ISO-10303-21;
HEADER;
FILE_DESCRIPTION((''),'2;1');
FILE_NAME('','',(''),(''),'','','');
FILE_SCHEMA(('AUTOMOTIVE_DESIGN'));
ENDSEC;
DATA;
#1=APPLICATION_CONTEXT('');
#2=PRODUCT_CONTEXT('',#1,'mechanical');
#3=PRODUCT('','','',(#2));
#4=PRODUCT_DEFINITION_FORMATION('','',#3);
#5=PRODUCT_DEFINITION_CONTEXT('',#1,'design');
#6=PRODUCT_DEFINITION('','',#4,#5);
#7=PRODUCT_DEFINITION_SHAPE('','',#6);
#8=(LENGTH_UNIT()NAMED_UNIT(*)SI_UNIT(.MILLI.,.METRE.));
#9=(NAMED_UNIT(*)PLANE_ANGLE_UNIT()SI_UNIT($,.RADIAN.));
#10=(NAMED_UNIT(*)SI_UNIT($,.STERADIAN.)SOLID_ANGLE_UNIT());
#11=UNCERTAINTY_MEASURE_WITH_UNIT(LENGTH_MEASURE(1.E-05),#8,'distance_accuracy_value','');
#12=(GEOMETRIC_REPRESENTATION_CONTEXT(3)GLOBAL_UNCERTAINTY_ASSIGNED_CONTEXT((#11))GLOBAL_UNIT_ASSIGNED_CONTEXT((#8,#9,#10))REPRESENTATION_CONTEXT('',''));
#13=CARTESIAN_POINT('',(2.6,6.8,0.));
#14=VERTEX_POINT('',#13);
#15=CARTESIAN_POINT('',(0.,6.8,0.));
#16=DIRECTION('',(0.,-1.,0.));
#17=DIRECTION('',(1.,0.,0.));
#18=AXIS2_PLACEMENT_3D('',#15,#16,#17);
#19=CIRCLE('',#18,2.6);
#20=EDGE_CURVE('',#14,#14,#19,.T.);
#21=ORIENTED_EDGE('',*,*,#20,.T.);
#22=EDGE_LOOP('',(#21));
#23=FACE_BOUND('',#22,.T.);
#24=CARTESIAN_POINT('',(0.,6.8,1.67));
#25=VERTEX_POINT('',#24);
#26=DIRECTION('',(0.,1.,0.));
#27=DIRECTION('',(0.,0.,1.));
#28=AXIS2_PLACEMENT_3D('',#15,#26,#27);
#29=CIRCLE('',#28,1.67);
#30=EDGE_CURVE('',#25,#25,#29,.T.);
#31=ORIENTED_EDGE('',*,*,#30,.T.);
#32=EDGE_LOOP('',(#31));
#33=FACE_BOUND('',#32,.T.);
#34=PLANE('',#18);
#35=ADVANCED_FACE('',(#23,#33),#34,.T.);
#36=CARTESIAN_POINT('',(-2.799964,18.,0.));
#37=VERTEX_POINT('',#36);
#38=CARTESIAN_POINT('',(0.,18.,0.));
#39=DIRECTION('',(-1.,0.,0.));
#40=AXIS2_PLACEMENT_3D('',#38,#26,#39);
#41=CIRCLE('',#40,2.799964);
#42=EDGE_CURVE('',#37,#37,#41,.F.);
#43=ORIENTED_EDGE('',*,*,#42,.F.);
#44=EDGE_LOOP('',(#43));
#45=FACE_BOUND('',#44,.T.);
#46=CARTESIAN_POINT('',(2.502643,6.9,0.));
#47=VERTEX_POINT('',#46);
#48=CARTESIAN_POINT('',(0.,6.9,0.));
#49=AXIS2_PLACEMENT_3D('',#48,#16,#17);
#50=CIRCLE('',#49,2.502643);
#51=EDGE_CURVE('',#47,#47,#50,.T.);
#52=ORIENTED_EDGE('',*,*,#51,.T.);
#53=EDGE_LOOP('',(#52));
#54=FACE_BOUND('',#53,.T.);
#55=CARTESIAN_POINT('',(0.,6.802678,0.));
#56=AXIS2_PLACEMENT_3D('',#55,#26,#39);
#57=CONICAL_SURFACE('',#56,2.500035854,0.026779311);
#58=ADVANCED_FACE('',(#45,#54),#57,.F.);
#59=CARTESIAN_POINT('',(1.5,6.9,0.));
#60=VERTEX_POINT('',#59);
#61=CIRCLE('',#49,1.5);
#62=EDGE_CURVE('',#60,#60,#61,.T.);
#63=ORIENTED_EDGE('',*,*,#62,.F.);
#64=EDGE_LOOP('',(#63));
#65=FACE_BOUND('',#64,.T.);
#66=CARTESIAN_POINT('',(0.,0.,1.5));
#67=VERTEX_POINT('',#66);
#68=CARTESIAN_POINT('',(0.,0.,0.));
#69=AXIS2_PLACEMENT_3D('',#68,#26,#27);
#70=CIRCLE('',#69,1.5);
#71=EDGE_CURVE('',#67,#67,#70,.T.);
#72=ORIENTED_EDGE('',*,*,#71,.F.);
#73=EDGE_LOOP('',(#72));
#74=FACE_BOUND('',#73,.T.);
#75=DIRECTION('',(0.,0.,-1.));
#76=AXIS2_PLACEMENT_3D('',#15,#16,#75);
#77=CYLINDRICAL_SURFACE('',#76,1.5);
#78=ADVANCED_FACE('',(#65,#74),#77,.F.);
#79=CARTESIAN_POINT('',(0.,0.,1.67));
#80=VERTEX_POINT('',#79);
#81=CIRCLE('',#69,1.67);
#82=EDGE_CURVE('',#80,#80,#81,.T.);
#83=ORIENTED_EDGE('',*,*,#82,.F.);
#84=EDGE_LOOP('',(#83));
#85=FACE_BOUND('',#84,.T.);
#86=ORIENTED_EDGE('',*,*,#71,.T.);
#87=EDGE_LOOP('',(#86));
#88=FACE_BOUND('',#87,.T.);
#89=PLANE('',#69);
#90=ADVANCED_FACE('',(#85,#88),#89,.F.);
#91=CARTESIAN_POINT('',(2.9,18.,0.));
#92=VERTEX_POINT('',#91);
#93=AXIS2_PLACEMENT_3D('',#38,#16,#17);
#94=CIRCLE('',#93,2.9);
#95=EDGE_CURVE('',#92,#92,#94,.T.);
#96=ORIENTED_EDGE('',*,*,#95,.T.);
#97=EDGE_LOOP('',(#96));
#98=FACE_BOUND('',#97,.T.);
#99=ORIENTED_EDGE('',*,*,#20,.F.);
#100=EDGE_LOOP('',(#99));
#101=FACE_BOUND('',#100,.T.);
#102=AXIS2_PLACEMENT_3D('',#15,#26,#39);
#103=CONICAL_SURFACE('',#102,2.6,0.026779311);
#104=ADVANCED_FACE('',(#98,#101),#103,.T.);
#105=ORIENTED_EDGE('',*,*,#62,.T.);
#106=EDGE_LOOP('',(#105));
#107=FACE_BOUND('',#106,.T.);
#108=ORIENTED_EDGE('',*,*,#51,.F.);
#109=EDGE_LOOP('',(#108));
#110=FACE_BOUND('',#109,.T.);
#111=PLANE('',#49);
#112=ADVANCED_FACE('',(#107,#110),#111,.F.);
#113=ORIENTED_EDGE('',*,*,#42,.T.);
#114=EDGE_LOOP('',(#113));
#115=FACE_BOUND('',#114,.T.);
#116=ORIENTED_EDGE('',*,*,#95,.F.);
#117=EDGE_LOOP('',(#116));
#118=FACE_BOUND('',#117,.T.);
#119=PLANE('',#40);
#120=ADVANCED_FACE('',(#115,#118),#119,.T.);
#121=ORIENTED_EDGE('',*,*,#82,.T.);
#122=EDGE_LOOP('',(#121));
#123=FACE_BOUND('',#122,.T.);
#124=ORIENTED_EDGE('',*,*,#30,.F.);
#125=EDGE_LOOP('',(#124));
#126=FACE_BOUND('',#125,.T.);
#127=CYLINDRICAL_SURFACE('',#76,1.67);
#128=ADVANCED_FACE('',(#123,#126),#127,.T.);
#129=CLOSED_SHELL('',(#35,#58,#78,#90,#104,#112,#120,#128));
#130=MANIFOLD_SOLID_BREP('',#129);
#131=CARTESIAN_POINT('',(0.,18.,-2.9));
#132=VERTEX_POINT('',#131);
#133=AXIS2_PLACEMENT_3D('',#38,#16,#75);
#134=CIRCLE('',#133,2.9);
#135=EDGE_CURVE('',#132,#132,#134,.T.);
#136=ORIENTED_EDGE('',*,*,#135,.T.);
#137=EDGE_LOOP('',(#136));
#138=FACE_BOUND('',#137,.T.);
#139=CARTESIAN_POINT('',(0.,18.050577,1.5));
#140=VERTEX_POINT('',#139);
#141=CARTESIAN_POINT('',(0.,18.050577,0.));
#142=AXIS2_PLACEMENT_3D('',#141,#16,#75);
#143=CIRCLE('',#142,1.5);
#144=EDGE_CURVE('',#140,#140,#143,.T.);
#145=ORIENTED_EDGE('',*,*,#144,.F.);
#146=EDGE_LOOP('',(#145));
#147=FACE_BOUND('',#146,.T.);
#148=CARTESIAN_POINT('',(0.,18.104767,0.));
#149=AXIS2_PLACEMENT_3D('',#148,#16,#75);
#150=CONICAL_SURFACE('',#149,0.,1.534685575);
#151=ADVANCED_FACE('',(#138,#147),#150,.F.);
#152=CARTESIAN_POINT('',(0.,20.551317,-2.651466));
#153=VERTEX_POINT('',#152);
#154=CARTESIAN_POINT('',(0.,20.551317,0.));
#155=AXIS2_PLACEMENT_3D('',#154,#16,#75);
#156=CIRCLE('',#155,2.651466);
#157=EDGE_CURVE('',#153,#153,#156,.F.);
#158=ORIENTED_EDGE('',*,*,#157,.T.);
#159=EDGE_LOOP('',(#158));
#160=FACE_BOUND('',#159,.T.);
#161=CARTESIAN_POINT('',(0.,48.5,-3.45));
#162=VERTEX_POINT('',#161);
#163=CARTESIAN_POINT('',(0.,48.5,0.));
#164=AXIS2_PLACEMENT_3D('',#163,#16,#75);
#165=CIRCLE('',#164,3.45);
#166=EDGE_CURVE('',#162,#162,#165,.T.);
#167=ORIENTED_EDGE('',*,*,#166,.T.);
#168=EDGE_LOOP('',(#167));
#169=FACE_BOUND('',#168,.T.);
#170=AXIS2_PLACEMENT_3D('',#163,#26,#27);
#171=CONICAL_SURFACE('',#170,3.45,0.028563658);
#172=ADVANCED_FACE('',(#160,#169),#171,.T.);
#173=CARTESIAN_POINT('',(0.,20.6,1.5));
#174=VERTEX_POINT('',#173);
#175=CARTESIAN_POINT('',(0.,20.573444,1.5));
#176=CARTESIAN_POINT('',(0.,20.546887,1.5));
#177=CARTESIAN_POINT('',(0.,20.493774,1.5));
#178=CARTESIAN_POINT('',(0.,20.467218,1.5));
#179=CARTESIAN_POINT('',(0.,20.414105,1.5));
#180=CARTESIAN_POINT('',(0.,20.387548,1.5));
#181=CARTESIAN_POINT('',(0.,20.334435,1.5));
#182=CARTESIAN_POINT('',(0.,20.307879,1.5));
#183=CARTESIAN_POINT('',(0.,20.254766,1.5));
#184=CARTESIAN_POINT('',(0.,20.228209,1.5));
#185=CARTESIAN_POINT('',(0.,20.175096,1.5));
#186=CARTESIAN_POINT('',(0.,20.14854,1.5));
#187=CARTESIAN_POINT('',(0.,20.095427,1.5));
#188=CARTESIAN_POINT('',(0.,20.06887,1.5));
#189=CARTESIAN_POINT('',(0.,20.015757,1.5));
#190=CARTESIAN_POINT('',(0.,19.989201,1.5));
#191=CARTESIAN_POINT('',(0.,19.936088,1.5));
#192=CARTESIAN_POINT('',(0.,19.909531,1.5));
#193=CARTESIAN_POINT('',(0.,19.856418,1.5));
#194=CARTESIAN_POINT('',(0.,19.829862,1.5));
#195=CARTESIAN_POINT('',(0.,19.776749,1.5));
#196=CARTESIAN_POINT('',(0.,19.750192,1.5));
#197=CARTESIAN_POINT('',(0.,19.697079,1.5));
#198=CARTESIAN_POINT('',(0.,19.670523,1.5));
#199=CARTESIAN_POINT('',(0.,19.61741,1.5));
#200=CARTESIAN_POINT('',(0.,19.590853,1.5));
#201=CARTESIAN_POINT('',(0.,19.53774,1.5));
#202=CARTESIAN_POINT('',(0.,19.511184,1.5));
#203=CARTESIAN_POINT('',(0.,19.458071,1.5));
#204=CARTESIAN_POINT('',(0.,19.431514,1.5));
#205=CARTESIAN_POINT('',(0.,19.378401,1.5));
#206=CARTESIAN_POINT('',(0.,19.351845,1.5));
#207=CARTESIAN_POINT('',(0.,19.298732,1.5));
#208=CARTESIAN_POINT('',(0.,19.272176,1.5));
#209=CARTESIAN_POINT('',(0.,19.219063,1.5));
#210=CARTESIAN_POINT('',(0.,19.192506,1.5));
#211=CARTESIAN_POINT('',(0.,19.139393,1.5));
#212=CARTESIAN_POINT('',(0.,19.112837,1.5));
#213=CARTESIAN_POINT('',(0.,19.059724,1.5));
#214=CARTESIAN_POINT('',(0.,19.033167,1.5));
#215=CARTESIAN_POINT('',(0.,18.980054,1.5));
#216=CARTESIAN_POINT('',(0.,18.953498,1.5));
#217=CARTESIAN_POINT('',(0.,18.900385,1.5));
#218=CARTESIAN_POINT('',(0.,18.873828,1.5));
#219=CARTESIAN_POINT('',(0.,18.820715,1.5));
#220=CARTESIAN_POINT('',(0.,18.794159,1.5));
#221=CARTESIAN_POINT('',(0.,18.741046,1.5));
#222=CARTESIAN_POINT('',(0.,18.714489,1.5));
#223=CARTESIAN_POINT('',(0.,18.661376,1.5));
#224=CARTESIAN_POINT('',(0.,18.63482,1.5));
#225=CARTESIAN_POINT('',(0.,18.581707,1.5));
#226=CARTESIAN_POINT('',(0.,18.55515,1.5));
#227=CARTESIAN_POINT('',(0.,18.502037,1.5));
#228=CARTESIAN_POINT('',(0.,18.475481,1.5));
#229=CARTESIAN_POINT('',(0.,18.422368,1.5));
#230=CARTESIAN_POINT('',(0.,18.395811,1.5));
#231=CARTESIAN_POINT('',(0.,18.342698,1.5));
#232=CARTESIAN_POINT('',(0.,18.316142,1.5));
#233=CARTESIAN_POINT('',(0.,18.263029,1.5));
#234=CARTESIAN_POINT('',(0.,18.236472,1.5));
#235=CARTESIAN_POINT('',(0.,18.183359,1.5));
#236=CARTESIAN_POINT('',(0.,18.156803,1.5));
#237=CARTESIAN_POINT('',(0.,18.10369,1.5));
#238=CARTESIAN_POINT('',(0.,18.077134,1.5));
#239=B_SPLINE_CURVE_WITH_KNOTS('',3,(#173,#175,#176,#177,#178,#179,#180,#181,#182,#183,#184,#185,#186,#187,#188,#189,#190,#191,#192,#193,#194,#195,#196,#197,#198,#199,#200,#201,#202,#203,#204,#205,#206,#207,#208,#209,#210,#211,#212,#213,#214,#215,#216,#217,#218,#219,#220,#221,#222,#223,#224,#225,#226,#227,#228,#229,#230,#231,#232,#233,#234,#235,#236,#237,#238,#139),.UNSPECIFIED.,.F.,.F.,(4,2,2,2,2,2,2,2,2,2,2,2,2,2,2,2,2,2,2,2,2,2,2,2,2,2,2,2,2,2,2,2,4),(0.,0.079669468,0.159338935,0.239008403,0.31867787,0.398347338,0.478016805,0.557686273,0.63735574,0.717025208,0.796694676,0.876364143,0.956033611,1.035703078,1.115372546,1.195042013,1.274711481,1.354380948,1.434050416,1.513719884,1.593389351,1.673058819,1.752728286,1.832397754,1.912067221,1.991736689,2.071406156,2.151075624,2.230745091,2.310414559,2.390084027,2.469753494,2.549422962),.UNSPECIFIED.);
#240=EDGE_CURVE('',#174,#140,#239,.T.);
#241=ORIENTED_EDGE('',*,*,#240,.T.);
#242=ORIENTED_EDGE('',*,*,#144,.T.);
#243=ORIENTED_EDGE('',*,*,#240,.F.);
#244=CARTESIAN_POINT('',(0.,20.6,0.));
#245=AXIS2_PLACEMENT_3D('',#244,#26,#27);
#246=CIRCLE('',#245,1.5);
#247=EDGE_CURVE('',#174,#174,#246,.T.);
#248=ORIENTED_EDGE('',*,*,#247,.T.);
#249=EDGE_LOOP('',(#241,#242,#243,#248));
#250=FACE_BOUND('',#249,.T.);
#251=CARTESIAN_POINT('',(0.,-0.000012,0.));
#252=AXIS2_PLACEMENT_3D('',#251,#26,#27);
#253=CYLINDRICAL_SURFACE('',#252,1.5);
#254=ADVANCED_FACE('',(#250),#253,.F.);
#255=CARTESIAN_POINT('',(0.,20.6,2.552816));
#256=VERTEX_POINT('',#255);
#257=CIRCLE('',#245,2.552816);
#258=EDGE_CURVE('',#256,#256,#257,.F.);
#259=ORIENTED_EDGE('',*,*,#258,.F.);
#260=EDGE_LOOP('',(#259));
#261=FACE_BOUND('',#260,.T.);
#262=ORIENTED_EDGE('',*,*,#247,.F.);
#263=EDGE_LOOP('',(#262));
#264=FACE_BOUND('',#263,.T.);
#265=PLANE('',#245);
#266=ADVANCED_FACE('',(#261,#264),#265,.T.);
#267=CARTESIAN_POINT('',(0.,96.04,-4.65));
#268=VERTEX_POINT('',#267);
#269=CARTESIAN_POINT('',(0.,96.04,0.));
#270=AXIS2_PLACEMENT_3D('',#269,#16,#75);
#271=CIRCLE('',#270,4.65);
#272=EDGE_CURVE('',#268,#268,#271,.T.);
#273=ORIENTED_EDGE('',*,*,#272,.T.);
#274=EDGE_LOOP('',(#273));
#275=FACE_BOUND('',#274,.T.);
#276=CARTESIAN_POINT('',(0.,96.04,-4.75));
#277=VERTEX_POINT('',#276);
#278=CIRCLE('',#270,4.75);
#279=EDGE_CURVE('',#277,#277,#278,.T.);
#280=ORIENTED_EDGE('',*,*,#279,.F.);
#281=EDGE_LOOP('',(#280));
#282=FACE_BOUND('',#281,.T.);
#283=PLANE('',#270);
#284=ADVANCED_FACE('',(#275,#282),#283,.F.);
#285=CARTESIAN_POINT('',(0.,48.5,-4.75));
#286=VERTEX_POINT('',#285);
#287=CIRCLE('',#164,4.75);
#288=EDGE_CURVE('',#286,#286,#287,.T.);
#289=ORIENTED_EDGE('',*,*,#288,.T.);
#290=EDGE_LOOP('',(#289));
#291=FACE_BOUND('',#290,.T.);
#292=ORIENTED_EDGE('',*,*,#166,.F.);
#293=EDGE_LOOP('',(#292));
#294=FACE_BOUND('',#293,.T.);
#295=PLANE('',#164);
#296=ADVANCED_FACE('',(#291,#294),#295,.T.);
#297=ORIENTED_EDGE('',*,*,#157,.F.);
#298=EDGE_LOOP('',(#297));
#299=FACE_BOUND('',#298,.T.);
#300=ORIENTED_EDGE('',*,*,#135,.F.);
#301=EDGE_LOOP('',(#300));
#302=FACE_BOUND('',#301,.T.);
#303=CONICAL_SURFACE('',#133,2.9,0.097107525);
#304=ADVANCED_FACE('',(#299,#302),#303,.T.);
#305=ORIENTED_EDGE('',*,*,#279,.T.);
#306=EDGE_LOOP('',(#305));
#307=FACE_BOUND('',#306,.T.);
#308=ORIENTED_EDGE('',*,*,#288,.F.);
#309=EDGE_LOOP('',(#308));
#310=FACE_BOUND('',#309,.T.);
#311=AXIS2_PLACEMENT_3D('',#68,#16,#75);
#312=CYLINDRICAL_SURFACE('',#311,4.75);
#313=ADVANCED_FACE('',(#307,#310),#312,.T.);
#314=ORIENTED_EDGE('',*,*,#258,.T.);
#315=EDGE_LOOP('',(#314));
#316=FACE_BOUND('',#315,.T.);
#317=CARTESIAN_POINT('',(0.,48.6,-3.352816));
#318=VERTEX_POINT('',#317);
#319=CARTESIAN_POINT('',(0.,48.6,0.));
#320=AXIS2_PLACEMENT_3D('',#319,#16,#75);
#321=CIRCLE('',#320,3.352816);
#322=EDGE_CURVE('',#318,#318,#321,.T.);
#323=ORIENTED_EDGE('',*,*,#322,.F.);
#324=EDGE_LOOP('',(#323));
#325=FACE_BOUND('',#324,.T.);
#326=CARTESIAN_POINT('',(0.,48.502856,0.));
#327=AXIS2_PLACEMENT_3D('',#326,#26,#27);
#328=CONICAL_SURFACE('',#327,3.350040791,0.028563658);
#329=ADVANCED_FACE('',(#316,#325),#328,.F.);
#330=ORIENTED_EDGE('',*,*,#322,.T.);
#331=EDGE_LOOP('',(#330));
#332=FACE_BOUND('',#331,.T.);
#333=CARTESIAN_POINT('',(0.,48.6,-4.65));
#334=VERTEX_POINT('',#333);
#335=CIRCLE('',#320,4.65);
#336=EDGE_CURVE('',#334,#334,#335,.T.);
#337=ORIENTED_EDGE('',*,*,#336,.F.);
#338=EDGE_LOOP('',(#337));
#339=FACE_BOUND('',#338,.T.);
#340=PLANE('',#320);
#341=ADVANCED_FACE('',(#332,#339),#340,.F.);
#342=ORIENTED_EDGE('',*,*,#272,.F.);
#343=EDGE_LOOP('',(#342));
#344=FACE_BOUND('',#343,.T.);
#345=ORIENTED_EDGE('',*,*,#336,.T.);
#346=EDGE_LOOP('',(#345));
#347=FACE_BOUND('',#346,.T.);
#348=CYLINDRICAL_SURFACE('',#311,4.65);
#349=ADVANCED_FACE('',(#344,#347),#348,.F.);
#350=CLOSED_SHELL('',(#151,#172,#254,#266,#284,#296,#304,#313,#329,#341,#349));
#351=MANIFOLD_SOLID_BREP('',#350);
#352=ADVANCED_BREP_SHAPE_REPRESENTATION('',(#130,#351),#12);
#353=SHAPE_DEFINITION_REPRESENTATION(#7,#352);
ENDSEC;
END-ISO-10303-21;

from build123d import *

# Parameters (mm, degrees)
SKETCH1_R               = 1.67
SKETCH1_R_2             = 1.5
BOSS_EXTRUDE1_DEPTH     = 6.8
SHELL3_T                = -0.1
CUT_EXTRUDE2_DEPTH      = 10080
CUT_EXTRUDE2_DEPTH_BACK = 97.274641521
SKETCH7_R               = 1.5


# Read off the part's stored shape, not the designer's step: Shell1
with BuildPart() as part:
    # Sketch1 → Boss-Extrude1 (new body)
    with BuildSketch(Plane(origin=(0, 0, 0), x_dir=(1, 0, 0), z_dir=(0, 1, 0))):
        with Locations(Location((0, 0, 0), (0, 0, 270))):
            Circle(SKETCH1_R)
        with Locations(Location((0, 0, 0), (0, 0, 270))):
            Circle(SKETCH1_R_2, mode=Mode.SUBTRACT)
    extrude(amount=BOSS_EXTRUDE1_DEPTH)

    # Sketch4 → Revolve3 (revolve)
    with BuildSketch(Plane.XY):
        Polygon((0, 6.8), (2.6, 6.8), (2.9, 18), (0, 18), align=None)
    revolve(axis=Axis((0, 6.8, 0), (0, 1, 0)))

    # Shell1 outline → Shell1 (revolve, cut)
    with BuildSketch(Plane.XY):
        Polygon((0, 18), (0, 6.9), (2.502642704, 6.9), (2.799964133, 18), align=None)
    revolve(axis=Axis((0, 0, 0), (0, 1, 0)), mode=Mode.SUBTRACT)


with BuildPart() as body_2:
    # Sketch5 → Revolve5 (revolve)
    with BuildSketch(Plane.XY, mode=Mode.PRIVATE) as revolve5_sk:
        Polygon((-2.65, 20.5), (0, 20.5), (0, 48.5), (0, 96.04), (-4.75, 96.04), (-4.75, 48.5), (-3.45, 48.5), align=None)
    revolve(revolve5_sk.sketch.rotate(Axis((0, 0, 0), (0, 1, 0)), 270), axis=Axis((0, 0, 0), (0, 1, 0)))

    # Shell3
    shell3_openings = [body_2.faces().sort_by_distance(p)[0] for p in [
        (0, 96.04, 0),
    ]]
    offset(amount=SHELL3_T, openings=shell3_openings, kind=Kind.INTERSECTION)

    # Sketch6 → Revolve6 (revolve)
    with BuildSketch(Plane.XY, mode=Mode.PRIVATE) as revolve6_sk:
        Polygon((0, 18.104766722), (0, 20.566368387), (2.65, 20.566368387), (2.9, 18), align=None)
    revolve(revolve6_sk.sketch.rotate(Axis((0, 18.104766722, 0), (0, 1, 0)), 90), axis=Axis((0, 18.104766722, 0), (0, 1, 0)))


with BuildPart() as cut_extrude2_tool:
    # Sketch7 → Cut-Extrude2 (new, two sides: drawn at the far end of the back side and taken through both)
    with BuildSketch(Plane(origin=(0, 0, 0), x_dir=(1, 0, 0), z_dir=(0, 1, 0)).offset(-CUT_EXTRUDE2_DEPTH_BACK)):
        with Locations(Location((0, 0, 0), (0, 0, 270))):
            Circle(SKETCH7_R)
    extrude(amount=CUT_EXTRUDE2_DEPTH + CUT_EXTRUDE2_DEPTH_BACK)


with BuildPart() as part_1:
    add(part.part)

    # Cut-Extrude2: cut by cut_extrude2_tool
    add(cut_extrude2_tool.part, mode=Mode.SUBTRACT)


with BuildPart() as body_2_1:
    add(body_2.part)

    # Cut-Extrude2: cut by cut_extrude2_tool
    add(cut_extrude2_tool.part, mode=Mode.SUBTRACT)


solid = Compound([part_1.part, body_2_1.part])
